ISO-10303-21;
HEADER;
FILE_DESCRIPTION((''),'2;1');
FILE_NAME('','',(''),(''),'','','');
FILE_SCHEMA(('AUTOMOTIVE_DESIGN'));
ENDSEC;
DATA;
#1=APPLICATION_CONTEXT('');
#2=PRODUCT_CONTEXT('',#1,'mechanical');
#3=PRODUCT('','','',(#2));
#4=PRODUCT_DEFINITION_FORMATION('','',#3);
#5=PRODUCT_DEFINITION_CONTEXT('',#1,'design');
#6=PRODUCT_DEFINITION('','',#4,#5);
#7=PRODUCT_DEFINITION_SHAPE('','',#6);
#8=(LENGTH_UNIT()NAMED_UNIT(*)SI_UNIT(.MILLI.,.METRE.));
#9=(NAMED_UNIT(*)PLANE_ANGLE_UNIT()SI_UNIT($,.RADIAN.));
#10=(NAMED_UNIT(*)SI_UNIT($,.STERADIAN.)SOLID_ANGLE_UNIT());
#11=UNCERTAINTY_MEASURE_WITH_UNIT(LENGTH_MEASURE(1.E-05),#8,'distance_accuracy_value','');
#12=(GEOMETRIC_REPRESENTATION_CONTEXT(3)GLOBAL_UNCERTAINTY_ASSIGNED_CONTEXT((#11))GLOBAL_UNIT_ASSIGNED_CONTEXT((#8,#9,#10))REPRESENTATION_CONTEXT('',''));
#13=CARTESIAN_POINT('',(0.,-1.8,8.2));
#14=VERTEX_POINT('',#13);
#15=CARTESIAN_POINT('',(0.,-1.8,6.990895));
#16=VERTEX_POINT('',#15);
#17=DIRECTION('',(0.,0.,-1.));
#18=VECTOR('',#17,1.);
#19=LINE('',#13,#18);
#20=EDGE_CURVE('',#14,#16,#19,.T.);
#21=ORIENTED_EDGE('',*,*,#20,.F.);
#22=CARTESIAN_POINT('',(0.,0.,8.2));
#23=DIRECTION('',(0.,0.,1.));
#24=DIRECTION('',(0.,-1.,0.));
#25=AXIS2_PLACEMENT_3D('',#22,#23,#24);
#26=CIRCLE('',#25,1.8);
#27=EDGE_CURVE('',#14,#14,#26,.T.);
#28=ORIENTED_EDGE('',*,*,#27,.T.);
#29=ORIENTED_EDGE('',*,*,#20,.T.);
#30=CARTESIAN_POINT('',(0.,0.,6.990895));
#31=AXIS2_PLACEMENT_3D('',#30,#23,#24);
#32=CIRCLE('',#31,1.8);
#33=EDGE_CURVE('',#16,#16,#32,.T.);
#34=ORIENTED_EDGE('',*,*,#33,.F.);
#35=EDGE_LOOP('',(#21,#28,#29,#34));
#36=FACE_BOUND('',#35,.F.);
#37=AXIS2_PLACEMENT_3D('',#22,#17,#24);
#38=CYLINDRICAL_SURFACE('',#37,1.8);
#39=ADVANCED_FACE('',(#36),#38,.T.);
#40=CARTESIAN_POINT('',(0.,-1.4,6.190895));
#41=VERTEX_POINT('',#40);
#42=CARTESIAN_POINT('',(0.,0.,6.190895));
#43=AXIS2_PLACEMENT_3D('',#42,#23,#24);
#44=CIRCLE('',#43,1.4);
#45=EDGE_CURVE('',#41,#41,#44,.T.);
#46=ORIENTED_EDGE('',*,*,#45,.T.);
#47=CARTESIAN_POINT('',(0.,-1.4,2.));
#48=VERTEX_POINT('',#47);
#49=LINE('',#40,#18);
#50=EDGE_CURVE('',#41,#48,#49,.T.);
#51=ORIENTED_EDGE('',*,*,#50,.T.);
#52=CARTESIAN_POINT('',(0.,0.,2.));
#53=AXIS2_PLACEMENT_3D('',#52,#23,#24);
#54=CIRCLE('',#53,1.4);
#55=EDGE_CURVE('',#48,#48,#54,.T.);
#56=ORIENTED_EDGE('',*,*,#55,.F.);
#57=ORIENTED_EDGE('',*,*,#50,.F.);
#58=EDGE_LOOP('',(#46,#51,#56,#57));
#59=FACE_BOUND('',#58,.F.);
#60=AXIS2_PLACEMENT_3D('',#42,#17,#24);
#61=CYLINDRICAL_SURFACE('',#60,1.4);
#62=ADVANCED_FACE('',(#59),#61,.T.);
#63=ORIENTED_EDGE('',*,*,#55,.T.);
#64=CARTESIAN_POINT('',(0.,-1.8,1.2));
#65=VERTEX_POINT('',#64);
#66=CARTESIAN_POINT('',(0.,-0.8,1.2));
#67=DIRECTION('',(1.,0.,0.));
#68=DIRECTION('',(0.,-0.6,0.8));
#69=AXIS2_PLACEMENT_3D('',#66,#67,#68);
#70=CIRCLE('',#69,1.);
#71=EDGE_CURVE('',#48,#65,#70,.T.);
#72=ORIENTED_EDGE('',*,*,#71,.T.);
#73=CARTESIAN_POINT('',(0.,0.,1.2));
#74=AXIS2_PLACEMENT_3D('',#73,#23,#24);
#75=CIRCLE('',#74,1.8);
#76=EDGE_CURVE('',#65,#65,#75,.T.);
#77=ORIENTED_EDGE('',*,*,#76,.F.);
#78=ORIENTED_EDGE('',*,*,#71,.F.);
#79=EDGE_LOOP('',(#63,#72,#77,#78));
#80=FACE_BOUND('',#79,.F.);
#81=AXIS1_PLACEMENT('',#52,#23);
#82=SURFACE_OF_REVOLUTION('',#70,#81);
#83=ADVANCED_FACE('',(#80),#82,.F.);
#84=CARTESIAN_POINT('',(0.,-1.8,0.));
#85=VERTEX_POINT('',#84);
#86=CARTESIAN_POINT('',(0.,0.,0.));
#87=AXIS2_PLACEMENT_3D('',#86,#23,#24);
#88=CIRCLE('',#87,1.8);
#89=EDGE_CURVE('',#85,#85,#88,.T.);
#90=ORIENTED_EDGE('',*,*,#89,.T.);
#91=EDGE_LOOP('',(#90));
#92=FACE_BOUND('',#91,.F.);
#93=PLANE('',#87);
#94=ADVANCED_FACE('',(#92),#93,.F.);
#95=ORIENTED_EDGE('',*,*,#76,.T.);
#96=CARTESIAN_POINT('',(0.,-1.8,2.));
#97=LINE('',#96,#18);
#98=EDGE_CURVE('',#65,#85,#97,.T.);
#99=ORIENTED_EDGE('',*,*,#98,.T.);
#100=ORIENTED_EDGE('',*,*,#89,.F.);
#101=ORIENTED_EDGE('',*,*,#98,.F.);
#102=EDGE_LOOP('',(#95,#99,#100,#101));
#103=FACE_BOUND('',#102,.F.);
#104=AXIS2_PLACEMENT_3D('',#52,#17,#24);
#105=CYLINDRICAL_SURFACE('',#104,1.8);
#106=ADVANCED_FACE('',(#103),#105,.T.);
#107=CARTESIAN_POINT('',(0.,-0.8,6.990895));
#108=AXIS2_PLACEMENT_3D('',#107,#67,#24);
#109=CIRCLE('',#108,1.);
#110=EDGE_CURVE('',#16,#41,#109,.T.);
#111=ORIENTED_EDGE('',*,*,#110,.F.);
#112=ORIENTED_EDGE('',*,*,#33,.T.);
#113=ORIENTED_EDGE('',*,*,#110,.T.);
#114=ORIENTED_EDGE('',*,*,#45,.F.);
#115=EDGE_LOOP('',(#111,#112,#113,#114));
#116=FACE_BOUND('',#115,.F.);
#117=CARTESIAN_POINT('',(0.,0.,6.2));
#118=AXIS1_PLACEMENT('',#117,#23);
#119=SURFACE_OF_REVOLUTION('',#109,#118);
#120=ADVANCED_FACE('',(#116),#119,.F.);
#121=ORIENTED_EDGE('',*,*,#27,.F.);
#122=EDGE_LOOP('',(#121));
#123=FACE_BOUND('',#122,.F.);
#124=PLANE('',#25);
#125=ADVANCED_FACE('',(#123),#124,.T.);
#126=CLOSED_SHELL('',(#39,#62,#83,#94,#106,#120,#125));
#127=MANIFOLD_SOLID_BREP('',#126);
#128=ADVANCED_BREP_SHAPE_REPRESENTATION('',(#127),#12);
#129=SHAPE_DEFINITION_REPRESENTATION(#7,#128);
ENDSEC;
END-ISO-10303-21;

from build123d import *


# Not quite as in the source:
# - a fillet or chamfer that OpenCascade refuses, or shapes differently, is made with other operations: its cross-section is extruded or revolved along the edge and cut away or added


with BuildPart() as f1:
    # F0 (on Right) → F1 (revolve)
    with BuildSketch(Plane.YZ):
        Polygon((-1.8, 0), (0, 0), (0, 8.2), (-1.8, 8.2), (-1.8, 6.2), (-1.4, 6.1908951029), (-1.4, 2), (-1.8, 2), align=None)
    revolve(axis=Axis((0, 0, 4.1), (0, 0, 1)))

    # F2: fillet of radius 1 on 2 edges, made by hand

    # F2_s1 → F2_t2 (revolve, cut)
    with BuildSketch(Plane.YZ):
        with BuildLine():
            ThreePointArc((-1.8, 6.9908951029), (-1.694427191, 6.5436815074), (-1.4, 6.1908951029))
            Line((-1.4, 6.1908951029), (-1.8, 6.2))
            Line((-1.8, 6.2), (-1.8, 6.9908951029))
        make_face()
    revolve(axis=Axis((0, 0, 6.2), (0, 0, 1)), mode=Mode.SUBTRACT)

    # F2_s3 → F2_t4 (revolve, cut)
    with BuildSketch(Plane.YZ):
        with BuildLine():
            ThreePointArc((-1.4, 2), (-1.694427191, 1.6472135955), (-1.8, 1.2))
            Line((-1.8, 1.2), (-1.8, 2))
            Line((-1.8, 2), (-1.4, 2))
        make_face()
    revolve(axis=Axis((0, 0, 2), (0, 0, 1)), mode=Mode.SUBTRACT)


solid = f1.part
